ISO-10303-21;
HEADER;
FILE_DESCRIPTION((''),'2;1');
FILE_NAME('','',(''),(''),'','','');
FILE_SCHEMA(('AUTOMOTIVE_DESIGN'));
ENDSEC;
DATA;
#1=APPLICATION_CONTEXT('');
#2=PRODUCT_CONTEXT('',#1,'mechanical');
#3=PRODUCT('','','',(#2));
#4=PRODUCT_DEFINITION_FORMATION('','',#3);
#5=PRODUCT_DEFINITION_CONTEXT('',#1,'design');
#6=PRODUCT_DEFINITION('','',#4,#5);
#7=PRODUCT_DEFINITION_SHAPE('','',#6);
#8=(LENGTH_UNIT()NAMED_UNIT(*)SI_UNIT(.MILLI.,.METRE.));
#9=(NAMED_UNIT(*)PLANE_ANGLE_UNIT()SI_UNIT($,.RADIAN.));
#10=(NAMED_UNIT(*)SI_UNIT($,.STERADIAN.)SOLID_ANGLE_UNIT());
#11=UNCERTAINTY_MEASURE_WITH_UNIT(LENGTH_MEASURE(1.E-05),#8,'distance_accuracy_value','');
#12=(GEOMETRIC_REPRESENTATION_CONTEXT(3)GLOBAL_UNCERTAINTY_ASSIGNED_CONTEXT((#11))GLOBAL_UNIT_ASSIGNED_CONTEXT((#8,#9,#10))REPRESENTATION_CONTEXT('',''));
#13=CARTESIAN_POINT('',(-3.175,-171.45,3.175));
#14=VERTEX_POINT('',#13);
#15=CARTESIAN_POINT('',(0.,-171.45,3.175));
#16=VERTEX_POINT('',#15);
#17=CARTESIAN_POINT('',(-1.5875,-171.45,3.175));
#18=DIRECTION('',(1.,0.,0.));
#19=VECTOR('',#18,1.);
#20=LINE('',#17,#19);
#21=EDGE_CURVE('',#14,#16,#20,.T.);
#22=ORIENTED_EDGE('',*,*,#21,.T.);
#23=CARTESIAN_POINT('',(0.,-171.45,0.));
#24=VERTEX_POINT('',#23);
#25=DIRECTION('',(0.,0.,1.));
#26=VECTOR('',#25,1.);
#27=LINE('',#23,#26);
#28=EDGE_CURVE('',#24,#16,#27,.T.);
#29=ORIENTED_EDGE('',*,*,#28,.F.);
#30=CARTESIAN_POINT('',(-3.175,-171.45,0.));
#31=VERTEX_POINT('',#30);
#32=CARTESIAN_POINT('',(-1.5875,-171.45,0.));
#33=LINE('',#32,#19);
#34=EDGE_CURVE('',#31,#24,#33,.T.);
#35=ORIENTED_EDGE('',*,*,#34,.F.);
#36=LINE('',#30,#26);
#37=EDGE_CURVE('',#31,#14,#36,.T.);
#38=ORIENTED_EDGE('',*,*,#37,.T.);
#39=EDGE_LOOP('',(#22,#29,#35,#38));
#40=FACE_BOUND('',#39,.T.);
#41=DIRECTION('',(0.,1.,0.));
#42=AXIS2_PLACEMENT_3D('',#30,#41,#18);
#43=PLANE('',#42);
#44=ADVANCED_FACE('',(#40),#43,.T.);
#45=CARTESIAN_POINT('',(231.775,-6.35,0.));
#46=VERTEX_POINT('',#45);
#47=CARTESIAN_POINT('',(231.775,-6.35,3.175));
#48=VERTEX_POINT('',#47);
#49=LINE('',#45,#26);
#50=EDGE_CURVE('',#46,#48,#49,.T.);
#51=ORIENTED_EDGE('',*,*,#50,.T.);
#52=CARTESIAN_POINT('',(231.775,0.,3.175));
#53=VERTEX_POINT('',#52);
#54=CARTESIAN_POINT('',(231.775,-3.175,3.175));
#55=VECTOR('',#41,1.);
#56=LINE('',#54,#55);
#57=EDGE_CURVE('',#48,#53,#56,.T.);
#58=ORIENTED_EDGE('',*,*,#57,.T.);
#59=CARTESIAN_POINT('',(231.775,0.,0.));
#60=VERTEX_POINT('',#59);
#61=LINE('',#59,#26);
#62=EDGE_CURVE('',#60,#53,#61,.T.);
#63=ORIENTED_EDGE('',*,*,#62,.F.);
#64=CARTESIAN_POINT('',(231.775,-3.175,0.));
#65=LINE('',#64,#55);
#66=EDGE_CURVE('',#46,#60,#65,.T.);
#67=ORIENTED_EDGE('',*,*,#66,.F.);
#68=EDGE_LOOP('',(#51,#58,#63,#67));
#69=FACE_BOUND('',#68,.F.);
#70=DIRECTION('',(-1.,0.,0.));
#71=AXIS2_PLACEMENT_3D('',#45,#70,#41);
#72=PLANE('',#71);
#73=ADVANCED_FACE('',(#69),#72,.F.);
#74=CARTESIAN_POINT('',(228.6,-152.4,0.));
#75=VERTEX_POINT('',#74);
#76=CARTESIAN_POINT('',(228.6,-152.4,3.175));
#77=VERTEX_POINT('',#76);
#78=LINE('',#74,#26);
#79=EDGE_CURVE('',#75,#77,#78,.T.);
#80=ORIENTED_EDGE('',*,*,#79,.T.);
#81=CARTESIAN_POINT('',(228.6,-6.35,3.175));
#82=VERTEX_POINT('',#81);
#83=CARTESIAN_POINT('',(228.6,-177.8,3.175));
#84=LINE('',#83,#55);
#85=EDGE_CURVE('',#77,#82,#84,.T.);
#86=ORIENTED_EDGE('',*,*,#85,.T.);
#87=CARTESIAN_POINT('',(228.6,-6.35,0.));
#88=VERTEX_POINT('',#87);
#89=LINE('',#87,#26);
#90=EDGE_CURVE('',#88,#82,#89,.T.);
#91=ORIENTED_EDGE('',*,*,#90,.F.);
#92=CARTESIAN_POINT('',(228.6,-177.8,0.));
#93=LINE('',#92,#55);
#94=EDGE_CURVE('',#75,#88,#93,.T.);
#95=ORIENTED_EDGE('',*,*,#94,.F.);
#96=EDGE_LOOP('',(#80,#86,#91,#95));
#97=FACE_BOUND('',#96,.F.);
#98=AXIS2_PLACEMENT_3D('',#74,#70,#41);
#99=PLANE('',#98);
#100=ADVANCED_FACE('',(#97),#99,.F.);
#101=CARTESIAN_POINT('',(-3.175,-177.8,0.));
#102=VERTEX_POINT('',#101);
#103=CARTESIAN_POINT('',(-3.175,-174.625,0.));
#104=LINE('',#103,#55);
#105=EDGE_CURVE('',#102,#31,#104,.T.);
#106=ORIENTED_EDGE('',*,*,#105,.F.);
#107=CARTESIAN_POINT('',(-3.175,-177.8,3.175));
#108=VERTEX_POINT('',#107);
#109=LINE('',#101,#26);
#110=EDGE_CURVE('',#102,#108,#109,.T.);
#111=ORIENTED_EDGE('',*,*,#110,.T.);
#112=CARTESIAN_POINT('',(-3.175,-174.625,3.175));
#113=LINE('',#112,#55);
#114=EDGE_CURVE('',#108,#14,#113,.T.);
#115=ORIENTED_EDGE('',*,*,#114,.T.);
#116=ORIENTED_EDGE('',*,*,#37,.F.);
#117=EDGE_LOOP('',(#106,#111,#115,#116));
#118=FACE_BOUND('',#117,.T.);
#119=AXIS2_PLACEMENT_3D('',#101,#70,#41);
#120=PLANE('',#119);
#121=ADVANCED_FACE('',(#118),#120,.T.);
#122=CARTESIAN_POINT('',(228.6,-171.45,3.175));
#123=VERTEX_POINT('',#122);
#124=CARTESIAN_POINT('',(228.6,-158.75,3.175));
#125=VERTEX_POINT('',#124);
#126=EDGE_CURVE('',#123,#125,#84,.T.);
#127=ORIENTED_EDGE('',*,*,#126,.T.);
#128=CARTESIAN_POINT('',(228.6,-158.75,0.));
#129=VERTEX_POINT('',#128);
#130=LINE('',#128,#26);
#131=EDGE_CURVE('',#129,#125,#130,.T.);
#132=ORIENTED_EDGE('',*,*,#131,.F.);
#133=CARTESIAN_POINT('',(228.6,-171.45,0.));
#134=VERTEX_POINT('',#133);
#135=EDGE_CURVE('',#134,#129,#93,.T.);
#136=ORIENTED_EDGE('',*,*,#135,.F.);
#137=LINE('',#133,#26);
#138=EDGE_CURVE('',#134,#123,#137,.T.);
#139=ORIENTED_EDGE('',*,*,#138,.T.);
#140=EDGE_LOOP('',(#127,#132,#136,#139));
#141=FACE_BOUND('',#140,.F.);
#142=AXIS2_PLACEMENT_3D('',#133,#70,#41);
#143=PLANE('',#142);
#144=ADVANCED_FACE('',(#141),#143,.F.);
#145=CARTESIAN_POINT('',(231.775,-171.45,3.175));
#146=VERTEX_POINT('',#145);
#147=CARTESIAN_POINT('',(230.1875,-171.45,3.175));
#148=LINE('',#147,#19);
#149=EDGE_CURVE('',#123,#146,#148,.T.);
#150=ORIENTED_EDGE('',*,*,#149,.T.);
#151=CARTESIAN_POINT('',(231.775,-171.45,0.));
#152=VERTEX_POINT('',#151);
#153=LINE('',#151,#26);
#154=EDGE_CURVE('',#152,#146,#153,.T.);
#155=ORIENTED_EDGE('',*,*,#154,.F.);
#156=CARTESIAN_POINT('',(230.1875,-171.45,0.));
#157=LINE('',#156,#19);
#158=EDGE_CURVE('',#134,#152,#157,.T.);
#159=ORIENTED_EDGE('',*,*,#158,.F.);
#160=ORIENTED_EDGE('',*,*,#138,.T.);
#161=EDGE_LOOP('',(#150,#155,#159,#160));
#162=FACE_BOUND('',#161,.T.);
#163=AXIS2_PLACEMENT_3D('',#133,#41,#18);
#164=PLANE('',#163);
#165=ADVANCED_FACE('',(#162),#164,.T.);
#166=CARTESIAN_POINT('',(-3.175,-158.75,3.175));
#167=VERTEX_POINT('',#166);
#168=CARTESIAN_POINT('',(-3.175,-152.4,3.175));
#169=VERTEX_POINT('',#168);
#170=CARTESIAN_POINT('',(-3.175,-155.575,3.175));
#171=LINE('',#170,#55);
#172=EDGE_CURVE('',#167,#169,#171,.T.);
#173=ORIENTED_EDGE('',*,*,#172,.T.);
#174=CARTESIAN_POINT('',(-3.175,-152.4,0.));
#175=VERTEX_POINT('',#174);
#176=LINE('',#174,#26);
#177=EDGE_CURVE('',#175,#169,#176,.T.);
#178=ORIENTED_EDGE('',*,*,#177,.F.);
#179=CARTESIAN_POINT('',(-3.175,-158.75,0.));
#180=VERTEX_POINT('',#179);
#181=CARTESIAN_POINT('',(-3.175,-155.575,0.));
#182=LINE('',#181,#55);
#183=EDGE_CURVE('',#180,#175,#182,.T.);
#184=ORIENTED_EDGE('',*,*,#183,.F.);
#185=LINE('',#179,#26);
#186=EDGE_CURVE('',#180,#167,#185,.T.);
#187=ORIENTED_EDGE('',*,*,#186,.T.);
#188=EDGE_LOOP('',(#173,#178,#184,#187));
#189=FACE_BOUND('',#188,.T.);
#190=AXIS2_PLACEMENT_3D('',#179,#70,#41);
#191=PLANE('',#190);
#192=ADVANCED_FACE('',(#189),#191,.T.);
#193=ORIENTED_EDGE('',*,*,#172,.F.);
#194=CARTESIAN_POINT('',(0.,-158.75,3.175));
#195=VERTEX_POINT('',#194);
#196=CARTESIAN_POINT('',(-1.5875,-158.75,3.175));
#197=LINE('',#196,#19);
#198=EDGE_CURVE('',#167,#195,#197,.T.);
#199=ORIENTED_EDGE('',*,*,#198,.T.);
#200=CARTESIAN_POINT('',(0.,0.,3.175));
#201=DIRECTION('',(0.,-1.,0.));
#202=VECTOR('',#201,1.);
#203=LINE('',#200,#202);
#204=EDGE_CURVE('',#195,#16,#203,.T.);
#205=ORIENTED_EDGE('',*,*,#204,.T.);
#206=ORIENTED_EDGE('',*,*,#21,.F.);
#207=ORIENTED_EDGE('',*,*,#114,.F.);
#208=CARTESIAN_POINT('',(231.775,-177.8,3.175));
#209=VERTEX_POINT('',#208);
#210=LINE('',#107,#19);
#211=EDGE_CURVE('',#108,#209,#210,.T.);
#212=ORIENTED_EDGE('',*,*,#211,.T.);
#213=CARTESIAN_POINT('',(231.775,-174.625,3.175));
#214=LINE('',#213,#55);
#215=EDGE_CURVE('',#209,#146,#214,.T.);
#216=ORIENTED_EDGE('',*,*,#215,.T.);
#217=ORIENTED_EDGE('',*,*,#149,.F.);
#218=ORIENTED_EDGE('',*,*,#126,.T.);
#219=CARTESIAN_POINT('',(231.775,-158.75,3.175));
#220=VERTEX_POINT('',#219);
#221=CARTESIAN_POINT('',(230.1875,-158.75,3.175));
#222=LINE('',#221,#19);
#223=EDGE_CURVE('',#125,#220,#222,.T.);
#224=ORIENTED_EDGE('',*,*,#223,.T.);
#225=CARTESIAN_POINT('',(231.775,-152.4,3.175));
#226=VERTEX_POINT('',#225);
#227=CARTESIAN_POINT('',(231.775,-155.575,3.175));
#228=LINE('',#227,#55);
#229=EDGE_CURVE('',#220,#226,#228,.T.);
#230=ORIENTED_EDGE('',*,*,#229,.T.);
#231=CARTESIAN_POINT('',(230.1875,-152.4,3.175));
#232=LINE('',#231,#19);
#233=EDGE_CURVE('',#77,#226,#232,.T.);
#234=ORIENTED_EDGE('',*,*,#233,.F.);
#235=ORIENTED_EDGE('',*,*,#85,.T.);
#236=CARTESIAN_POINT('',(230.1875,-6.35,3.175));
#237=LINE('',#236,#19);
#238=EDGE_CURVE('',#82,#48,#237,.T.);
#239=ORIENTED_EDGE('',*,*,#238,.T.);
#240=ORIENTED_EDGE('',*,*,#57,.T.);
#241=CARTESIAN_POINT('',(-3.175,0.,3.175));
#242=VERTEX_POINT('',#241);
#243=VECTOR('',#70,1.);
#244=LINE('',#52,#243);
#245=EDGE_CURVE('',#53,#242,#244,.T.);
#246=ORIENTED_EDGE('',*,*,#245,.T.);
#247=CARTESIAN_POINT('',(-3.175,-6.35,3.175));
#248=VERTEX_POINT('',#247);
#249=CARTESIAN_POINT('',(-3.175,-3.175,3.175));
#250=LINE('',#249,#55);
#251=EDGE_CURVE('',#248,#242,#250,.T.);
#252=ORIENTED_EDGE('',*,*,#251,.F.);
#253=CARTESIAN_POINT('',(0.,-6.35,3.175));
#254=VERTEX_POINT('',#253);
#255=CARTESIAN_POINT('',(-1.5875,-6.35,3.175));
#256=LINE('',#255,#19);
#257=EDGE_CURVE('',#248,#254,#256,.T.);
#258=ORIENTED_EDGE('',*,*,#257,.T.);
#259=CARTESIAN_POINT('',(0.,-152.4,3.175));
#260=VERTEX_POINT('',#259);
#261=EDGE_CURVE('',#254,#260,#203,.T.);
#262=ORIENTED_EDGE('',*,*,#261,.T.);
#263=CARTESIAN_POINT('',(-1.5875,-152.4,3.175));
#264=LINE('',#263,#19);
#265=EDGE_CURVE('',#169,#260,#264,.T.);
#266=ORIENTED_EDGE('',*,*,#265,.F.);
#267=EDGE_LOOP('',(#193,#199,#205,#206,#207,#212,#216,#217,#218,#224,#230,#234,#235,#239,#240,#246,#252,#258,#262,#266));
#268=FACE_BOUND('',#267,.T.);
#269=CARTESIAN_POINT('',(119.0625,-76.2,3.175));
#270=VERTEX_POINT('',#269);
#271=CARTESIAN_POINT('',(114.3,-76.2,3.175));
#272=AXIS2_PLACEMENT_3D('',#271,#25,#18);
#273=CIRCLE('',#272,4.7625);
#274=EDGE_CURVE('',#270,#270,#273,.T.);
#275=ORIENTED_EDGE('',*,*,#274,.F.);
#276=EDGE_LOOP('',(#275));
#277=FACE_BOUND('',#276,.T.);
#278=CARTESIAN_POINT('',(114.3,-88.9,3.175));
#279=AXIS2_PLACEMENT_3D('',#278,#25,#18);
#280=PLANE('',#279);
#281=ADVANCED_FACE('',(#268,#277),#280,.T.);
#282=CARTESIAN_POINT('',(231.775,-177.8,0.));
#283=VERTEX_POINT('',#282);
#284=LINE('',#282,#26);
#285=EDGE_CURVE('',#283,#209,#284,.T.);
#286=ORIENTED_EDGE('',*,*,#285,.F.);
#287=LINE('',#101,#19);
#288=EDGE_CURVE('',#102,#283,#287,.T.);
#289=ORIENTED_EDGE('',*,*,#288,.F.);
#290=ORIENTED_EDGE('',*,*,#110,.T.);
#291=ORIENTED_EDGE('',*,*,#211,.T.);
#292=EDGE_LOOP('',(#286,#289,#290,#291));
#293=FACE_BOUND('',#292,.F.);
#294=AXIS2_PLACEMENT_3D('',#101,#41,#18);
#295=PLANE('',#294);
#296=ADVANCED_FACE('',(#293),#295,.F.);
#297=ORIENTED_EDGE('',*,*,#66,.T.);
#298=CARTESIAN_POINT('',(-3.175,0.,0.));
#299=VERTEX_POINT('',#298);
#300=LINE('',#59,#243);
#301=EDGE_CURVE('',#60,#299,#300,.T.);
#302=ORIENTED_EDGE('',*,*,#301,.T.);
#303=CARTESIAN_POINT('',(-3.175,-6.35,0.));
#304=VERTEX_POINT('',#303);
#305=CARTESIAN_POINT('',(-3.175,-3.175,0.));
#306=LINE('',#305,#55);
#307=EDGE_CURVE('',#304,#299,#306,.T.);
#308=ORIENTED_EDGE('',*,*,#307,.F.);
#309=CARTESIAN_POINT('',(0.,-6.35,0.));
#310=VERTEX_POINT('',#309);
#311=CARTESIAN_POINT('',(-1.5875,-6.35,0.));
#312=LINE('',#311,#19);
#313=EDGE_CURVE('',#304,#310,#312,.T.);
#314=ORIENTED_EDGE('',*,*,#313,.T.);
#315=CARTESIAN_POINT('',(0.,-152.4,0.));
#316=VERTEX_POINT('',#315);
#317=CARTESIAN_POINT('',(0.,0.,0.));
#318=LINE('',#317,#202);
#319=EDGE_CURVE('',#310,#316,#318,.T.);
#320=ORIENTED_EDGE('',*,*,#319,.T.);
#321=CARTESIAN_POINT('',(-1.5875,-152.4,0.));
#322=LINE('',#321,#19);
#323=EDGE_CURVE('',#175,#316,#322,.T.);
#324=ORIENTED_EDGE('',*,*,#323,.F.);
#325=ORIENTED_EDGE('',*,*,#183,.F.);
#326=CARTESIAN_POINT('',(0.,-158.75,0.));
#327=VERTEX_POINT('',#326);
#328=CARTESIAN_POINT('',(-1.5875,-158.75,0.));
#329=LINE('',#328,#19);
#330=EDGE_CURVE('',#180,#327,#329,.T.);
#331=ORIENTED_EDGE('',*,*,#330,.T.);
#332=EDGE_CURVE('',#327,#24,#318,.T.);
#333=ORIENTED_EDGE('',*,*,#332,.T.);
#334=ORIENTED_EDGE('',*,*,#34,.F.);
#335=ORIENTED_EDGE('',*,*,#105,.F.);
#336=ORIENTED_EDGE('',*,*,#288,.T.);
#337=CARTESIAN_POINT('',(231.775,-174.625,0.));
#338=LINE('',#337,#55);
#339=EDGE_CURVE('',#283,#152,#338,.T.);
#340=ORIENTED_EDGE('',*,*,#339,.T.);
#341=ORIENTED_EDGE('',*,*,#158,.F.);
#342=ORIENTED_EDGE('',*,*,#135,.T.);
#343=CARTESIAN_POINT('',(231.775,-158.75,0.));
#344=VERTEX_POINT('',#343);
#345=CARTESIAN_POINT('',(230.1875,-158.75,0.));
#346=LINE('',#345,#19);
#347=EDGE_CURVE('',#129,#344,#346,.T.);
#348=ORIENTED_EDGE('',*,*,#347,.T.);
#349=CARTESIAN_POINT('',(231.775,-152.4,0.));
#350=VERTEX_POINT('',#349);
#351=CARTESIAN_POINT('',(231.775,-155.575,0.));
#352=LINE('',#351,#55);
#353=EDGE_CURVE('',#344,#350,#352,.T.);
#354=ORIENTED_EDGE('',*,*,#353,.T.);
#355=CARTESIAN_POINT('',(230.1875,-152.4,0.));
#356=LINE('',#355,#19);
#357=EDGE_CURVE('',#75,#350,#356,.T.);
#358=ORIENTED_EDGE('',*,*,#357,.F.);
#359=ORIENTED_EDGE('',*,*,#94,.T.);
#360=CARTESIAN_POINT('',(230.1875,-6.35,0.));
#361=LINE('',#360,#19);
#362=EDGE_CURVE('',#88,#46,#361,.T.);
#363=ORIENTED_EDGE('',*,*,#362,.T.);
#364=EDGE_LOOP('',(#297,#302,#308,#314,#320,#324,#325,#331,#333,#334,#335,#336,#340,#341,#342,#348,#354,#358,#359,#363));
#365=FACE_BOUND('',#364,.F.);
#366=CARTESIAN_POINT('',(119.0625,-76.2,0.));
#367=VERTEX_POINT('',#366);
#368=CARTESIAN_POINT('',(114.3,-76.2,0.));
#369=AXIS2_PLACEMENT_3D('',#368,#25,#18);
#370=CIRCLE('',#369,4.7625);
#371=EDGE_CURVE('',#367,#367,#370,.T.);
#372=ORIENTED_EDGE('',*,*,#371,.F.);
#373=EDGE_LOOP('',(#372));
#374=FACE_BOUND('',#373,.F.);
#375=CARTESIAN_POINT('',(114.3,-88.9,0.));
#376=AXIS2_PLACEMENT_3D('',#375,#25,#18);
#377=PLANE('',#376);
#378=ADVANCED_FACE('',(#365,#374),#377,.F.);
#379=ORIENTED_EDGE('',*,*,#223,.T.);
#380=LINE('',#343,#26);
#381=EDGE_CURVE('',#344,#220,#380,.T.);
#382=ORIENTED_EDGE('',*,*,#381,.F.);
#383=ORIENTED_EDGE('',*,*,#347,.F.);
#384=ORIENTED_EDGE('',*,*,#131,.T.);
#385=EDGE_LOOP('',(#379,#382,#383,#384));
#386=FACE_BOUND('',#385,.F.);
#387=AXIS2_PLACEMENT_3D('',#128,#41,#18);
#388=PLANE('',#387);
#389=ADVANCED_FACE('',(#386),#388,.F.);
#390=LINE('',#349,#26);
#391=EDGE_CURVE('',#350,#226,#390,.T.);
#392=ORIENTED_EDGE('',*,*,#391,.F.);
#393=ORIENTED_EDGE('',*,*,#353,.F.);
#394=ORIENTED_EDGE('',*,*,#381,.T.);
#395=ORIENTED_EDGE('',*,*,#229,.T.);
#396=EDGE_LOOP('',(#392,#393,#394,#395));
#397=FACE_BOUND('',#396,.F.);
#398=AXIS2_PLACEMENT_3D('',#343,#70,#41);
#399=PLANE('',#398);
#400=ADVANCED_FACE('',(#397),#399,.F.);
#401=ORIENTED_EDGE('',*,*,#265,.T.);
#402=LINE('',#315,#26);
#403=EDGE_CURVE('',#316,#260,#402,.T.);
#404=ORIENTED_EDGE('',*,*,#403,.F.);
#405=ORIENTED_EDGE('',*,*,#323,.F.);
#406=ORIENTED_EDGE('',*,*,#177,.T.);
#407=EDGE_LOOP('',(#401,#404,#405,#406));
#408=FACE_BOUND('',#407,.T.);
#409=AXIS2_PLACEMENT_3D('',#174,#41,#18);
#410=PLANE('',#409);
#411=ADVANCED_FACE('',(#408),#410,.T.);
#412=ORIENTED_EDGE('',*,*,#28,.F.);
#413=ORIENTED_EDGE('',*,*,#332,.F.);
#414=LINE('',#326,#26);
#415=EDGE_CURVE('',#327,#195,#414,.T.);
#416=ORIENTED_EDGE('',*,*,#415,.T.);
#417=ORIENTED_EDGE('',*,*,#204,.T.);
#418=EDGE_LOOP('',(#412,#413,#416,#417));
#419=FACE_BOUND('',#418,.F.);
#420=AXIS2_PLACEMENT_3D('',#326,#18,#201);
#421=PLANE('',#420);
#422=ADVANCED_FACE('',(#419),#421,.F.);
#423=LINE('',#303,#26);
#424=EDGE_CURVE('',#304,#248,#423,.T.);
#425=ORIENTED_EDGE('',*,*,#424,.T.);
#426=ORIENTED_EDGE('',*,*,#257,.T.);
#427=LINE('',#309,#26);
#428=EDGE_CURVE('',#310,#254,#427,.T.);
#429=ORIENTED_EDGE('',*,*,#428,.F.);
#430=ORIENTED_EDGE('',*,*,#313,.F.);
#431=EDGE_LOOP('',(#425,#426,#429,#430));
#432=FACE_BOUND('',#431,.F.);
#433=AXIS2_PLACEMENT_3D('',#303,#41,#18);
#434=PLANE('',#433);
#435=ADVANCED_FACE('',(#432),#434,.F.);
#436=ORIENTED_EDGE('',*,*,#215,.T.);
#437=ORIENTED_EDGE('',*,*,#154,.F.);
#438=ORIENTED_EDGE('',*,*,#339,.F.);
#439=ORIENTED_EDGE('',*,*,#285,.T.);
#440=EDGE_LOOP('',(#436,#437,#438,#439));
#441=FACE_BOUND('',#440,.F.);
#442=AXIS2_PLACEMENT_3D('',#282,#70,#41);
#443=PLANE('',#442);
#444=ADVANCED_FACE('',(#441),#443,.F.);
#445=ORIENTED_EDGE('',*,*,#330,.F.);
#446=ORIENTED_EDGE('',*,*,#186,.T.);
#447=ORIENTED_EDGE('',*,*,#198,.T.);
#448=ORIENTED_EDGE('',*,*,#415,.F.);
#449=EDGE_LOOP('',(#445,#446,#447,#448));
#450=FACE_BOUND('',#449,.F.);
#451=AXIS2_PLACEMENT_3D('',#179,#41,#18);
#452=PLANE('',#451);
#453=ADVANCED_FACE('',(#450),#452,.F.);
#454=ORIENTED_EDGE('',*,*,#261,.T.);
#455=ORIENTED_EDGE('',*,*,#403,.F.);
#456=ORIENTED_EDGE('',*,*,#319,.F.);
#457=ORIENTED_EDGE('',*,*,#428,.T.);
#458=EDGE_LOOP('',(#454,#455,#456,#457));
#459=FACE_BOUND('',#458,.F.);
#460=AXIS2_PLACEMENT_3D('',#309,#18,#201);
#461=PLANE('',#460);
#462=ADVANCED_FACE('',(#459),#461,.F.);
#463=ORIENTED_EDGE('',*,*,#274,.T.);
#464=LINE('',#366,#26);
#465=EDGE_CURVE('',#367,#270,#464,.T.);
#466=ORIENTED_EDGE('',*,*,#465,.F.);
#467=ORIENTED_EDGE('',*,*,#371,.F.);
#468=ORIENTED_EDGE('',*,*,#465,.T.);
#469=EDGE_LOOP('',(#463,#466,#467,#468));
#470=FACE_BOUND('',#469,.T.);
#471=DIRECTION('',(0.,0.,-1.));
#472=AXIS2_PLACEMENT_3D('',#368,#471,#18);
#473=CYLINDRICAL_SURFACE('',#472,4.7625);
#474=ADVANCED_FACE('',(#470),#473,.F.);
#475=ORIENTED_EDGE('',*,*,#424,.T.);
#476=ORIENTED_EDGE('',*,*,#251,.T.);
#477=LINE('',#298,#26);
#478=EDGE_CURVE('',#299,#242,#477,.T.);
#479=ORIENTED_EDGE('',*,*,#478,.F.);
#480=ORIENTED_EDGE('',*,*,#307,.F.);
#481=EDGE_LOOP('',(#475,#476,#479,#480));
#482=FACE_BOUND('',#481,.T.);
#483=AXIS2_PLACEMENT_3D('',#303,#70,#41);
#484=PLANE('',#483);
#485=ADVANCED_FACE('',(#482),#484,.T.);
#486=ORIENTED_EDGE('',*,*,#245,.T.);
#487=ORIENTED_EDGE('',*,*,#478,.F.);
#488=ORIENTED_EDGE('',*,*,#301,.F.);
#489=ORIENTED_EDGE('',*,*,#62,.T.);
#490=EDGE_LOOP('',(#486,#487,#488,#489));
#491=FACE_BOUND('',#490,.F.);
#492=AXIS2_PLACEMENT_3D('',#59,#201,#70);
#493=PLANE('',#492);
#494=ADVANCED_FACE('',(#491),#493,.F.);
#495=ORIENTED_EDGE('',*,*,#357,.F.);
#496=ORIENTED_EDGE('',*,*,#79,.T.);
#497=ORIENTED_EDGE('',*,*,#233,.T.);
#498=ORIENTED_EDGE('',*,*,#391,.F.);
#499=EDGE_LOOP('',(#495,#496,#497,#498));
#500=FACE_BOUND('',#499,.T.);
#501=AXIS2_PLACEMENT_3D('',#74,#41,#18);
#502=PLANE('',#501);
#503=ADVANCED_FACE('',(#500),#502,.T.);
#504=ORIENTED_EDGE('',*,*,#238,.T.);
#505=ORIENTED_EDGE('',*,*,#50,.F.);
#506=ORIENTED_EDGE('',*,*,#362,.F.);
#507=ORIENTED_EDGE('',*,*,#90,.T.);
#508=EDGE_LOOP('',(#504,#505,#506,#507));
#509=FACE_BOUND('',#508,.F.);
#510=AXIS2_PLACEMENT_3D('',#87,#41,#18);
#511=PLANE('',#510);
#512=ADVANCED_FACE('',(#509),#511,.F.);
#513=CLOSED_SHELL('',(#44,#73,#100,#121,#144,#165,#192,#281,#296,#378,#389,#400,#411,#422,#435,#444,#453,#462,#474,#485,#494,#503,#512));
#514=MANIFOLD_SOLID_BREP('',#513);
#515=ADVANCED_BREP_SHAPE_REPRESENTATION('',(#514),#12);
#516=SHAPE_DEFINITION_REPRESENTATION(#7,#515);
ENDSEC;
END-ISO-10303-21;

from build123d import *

# Parameters (mm, degrees)
F0_R     = 4.7625
F0_W     = 3.175
F0_H     = 6.35
F1_DEPTH = 3.175


# Not quite as in the source:
# - a length typed as a fraction of an inch, garbled in the dataset ("3 / 203.2 mm" for 3/8 in), is restored


with BuildPart() as f1:
    # F0 (on Top) → F1 (new body)
    with BuildSketch(Plane.XY):
        Polygon((228.6, 0), (0, 0), (0, -6.35), (0, -152.4), (0, -158.75), (0, -171.45), (0, -177.8), (228.6, -177.8), (228.6, -171.45), (228.6, -158.75), (228.6, -152.4), (228.6, -6.35), align=None)
        with Locations((114.3, -76.2)):
            Circle(F0_R, mode=Mode.SUBTRACT)
        with Locations((-1.5875, -155.575)):
            Rectangle(F0_W, F0_H)
        with Locations((-1.5875, -174.625)):
            Rectangle(F0_W, F0_H)
        with Locations((-1.5875, -3.175)):
            Rectangle(F0_W, F0_H)
        with Locations((230.1875, -3.175)):
            Rectangle(F0_W, F0_H)
        with Locations((230.1875, -155.575)):
            Rectangle(F0_W, F0_H)
        with Locations((230.1875, -174.625)):
            Rectangle(F0_W, F0_H)
    extrude(amount=F1_DEPTH)


solid = f1.part
